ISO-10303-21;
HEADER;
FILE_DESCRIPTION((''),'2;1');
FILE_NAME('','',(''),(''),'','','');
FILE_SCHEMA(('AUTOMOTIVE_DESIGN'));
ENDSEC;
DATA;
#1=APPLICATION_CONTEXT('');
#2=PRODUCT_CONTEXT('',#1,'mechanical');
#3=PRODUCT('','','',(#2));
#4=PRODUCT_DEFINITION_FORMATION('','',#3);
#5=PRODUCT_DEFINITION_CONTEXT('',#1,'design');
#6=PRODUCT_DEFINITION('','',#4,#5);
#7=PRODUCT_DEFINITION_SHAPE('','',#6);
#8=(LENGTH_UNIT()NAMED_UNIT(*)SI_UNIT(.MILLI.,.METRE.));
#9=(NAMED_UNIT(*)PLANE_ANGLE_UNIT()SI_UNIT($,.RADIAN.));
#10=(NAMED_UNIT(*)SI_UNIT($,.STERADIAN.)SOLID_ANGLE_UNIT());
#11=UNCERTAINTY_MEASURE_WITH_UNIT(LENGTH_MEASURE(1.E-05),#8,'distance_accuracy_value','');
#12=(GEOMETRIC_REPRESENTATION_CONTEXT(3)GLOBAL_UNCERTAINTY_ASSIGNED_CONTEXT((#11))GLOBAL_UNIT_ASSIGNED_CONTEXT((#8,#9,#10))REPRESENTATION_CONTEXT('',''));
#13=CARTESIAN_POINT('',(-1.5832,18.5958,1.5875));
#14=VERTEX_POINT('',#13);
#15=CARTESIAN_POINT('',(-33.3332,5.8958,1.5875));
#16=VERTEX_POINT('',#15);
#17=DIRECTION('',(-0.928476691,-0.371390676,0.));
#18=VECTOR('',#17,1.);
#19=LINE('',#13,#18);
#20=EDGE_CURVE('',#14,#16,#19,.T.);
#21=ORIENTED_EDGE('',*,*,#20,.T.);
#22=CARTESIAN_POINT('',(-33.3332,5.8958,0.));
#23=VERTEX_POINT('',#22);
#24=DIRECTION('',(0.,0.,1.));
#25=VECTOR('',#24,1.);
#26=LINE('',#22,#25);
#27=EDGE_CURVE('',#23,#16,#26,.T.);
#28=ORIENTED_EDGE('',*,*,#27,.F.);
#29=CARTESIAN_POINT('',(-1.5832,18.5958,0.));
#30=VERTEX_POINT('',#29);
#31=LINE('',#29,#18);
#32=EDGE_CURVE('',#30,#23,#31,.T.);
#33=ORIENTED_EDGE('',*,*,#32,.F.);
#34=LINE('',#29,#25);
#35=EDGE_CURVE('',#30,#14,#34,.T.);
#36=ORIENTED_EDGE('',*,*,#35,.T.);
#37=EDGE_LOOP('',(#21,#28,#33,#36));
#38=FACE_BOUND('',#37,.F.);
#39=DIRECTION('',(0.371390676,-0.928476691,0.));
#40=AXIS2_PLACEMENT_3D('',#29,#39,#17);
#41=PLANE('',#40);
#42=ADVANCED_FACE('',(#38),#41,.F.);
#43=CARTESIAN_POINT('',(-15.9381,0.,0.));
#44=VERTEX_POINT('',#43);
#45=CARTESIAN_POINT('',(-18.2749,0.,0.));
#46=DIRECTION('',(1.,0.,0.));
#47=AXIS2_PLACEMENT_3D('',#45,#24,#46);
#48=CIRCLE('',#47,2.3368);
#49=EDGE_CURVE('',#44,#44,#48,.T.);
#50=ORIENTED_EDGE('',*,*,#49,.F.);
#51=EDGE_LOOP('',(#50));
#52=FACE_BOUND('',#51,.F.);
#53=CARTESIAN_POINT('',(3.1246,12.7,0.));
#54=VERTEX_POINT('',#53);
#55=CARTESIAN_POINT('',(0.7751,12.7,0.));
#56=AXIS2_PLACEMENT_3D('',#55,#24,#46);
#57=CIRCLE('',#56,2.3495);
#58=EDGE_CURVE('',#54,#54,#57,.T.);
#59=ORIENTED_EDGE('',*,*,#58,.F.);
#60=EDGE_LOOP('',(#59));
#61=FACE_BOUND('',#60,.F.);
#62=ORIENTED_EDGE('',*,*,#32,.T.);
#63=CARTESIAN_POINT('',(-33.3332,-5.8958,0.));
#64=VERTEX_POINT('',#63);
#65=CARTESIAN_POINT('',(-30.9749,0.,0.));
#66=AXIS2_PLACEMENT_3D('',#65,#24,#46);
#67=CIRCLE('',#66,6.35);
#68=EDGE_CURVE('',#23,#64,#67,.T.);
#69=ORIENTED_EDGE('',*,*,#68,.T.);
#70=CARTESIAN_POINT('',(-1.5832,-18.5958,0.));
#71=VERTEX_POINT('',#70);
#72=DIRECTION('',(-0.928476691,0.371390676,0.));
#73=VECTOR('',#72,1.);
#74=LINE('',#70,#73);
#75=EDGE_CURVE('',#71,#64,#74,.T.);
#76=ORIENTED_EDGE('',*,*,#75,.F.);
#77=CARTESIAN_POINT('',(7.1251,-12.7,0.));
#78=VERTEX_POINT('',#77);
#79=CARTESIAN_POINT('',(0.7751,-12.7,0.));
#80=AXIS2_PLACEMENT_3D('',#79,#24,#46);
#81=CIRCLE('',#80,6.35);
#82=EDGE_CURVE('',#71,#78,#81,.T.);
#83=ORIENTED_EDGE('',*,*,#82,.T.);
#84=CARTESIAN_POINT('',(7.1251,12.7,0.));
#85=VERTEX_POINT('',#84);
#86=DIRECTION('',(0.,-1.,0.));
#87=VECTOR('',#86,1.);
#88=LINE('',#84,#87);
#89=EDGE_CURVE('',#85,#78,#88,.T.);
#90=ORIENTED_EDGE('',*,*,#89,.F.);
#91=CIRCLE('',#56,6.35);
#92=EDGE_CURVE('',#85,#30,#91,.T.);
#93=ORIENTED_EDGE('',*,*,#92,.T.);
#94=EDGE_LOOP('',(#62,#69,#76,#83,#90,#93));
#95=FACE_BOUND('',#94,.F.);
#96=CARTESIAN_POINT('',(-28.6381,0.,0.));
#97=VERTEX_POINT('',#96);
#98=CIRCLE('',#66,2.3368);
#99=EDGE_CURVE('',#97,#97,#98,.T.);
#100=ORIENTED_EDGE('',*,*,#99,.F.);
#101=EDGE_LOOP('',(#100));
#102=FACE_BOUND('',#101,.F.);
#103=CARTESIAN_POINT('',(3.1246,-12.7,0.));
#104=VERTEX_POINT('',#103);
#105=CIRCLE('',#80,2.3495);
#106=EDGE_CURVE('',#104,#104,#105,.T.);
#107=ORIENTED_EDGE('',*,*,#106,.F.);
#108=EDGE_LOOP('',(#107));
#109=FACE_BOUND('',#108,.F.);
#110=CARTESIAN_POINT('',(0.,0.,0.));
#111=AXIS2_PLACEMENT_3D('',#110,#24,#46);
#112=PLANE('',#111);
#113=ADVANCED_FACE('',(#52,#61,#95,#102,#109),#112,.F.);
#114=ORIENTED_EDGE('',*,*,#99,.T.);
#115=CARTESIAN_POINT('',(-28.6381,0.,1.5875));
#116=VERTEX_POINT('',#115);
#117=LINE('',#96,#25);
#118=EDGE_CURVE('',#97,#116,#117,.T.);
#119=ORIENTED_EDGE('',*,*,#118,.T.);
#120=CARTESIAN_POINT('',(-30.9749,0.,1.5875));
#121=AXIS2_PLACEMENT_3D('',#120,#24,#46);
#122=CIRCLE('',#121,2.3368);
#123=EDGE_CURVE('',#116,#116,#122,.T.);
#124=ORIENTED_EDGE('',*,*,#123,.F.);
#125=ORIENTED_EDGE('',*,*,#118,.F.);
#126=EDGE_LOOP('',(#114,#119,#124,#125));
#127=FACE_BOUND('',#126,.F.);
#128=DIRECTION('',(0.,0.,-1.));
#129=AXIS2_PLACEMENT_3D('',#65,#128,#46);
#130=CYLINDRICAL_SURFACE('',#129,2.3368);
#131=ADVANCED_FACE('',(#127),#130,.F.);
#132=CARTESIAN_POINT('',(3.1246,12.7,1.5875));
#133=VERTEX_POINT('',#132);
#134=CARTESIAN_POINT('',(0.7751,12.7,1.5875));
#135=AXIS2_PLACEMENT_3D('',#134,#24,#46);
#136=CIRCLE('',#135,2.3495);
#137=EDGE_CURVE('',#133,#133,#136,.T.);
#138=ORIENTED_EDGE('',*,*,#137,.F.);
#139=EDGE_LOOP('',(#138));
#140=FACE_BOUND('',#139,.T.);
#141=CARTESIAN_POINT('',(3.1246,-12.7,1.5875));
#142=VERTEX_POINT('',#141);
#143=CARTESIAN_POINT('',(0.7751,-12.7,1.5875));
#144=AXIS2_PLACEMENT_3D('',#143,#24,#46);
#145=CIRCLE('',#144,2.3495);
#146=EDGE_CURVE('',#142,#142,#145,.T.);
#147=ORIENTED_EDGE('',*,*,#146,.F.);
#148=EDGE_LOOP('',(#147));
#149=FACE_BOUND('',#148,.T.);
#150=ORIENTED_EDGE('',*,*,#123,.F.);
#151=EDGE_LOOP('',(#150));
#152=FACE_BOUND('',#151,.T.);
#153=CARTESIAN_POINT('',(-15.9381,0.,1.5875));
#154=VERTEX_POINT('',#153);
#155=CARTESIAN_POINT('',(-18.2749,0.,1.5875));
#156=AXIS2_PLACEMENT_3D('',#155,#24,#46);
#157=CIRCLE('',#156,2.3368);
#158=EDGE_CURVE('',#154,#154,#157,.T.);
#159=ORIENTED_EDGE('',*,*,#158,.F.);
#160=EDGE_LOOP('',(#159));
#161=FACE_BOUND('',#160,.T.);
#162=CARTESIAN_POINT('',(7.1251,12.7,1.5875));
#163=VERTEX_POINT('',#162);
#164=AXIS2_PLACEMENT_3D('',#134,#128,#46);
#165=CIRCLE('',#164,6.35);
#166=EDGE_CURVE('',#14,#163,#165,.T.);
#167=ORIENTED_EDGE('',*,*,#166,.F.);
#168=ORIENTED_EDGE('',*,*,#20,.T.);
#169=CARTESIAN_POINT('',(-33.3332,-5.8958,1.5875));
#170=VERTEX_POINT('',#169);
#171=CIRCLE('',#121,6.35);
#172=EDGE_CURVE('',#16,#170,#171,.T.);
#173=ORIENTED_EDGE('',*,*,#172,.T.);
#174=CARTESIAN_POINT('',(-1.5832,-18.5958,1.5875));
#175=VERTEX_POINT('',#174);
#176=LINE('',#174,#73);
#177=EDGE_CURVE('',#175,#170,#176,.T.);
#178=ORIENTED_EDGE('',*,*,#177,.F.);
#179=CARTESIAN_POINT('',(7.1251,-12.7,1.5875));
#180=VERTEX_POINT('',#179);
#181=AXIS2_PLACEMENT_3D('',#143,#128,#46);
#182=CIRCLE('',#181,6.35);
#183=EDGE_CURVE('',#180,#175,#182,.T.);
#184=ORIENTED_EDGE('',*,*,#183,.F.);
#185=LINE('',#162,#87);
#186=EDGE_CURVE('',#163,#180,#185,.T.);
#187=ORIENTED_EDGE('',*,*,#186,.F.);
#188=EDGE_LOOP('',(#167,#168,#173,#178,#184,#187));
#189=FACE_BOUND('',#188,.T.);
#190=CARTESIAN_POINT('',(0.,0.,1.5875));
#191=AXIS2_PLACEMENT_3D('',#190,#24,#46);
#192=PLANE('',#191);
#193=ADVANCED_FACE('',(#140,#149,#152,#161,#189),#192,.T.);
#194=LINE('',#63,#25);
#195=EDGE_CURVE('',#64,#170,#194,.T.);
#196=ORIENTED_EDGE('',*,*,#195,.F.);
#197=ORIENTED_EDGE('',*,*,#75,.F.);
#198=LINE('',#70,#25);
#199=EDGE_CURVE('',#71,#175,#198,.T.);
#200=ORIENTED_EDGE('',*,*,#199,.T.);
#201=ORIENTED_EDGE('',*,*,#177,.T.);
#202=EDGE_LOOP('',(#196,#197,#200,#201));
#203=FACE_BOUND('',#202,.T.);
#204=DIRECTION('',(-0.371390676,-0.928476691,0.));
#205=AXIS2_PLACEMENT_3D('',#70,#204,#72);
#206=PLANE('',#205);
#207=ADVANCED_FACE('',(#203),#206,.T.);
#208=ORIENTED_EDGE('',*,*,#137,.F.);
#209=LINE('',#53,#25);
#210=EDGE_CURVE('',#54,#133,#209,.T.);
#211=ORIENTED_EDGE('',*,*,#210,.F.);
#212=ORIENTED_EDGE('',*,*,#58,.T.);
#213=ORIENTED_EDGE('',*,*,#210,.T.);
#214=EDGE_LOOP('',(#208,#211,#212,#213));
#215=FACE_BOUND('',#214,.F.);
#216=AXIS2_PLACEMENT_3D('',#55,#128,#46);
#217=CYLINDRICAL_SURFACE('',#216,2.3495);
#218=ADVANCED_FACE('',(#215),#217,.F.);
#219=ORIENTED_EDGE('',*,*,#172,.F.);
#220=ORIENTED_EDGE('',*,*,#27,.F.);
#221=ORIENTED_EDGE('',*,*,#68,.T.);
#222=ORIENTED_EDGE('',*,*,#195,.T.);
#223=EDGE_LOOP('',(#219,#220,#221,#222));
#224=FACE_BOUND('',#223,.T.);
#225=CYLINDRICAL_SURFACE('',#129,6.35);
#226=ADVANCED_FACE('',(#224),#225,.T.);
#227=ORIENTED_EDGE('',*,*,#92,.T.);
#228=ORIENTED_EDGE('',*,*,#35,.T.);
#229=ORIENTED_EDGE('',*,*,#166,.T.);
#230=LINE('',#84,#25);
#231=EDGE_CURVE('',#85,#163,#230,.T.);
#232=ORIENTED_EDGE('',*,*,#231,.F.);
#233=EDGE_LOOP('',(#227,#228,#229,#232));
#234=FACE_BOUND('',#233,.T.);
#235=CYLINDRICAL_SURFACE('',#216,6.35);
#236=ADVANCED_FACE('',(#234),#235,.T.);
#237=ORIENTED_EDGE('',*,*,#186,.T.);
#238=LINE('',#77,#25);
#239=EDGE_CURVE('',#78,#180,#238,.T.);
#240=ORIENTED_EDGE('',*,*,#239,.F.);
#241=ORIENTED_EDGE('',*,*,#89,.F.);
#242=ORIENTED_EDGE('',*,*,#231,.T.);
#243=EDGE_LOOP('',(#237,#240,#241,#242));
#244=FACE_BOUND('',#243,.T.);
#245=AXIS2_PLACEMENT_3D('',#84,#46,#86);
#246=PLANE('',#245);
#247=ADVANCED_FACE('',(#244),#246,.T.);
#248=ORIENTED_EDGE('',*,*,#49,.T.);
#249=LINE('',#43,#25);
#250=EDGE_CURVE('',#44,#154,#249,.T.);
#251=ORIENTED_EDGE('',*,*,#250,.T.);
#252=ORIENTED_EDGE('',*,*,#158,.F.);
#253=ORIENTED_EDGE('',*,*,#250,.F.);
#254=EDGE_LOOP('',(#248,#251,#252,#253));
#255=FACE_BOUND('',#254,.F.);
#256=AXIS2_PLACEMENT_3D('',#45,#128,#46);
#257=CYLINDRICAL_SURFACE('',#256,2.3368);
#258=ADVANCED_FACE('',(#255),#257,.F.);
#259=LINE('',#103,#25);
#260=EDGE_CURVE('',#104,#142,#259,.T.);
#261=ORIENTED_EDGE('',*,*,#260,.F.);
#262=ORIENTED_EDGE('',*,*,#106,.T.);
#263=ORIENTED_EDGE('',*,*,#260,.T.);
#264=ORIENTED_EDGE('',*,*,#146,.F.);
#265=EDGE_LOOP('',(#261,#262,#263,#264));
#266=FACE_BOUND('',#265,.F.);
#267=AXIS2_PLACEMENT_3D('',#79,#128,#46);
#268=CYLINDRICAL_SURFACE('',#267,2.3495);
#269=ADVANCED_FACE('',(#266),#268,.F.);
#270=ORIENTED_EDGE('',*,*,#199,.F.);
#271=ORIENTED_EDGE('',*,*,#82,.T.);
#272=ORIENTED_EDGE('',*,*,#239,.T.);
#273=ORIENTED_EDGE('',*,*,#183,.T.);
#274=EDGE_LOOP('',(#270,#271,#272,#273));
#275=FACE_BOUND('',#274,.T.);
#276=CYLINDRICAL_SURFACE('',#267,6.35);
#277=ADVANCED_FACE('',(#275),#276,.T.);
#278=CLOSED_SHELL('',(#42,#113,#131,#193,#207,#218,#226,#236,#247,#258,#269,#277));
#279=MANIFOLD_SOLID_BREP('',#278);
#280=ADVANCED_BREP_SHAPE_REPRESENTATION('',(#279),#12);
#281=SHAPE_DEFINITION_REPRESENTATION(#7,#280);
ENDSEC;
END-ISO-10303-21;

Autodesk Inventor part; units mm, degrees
ref_plane "YZ Plane" through (0, 0, 0) normal (1, 0, 0) x (0, 1, 0)
ref_plane "XZ Plane" through (0, 0, 0) normal (0, 1, 0) x (-1, 0, 0)
ref_plane "XY Plane" through (0, 0, 0) normal (0, 0, 1) x (1, 0, 0)
sketch "Sketch1" plane through (0, 0, 0) normal (0, 0, 1) x (1, 0, 0)
  circle A0 centre (0.7751, 12.7) radius 2.1844 construction
  circle A1 centre (0.7751, -12.7) radius 2.1844 construction
  circle A2 centre (0.7751, 12.7) radius 2.3495
  circle A3 centre (0.7751, -12.7) radius 2.3495
  circle A4 centre (-18.2749, 0) radius 2.3368
  circle A5 centre (-30.9749, 0) radius 2.3368
  circle A6 centre (-30.9749, 0) radius 6.35
  circle A7 centre (0.7751, -12.7) radius 6.35
  circle A8 centre (0.7751, 12.7) radius 6.35
  line L0 (7.1251, 12.7) -> (7.1251, -12.7)
  line L1 (-1.5832, -18.5958) -> (-33.3332, -5.8958)
  line L2 (-1.5832, 18.5958) -> (-33.3332, 5.8958)
  point P0 (0, 0)
  dimension "d0" = 4.699
  dimension "d1" = 4.699
  dimension "d2" = 4.6736
  dimension "d3" = 4.6736
  dimension "d4" = 12.7
  dimension "d5" = 19.05
  dimension "d6" = 12.7
  dimension "d7" = 12.7
  dimension "d8" = 12.7
extrude "Plate1" add sketch "Sketch1" along normal blind 1.5875 contours A6 | A6 L2 A8 L0 A7 L1
sheet face with bend "Face2" sketch "Sketch1" thickness 1.5875 toward (0, 0, 1) bend radius 1.5875 contours A8 | A7
bend "Bend1"
equation "\"d9\" = Thickness"
equation "\"d10\" = BendRadius"
equation "\"d11\" = BendReliefWidth"
equation "\"d13\" = MinimumRemnant"
equation "\"d12\" = BendReliefDepth"
equation "\"d14\" = TransitionRadius"
equation "\"BendRadius\" = Thickness"
equation "\"BendReliefWidth\" = Thickness"
equation "\"BendReliefDepth\" = 0.5 * Thickness"
equation "\"CornerReliefSize\" = 4 * Thickness"
equation "\"MinimumRemnant\" = 2 * Thickness"
equation "\"TransitionRadius\" = BendRadius"
equation "\"JacobiRadiusSize\" = BendRadius"
equation "\"GapSize\" = Thickness"
equation "\"Thickness\" = 1.5875"
properties part number "imuMount"
